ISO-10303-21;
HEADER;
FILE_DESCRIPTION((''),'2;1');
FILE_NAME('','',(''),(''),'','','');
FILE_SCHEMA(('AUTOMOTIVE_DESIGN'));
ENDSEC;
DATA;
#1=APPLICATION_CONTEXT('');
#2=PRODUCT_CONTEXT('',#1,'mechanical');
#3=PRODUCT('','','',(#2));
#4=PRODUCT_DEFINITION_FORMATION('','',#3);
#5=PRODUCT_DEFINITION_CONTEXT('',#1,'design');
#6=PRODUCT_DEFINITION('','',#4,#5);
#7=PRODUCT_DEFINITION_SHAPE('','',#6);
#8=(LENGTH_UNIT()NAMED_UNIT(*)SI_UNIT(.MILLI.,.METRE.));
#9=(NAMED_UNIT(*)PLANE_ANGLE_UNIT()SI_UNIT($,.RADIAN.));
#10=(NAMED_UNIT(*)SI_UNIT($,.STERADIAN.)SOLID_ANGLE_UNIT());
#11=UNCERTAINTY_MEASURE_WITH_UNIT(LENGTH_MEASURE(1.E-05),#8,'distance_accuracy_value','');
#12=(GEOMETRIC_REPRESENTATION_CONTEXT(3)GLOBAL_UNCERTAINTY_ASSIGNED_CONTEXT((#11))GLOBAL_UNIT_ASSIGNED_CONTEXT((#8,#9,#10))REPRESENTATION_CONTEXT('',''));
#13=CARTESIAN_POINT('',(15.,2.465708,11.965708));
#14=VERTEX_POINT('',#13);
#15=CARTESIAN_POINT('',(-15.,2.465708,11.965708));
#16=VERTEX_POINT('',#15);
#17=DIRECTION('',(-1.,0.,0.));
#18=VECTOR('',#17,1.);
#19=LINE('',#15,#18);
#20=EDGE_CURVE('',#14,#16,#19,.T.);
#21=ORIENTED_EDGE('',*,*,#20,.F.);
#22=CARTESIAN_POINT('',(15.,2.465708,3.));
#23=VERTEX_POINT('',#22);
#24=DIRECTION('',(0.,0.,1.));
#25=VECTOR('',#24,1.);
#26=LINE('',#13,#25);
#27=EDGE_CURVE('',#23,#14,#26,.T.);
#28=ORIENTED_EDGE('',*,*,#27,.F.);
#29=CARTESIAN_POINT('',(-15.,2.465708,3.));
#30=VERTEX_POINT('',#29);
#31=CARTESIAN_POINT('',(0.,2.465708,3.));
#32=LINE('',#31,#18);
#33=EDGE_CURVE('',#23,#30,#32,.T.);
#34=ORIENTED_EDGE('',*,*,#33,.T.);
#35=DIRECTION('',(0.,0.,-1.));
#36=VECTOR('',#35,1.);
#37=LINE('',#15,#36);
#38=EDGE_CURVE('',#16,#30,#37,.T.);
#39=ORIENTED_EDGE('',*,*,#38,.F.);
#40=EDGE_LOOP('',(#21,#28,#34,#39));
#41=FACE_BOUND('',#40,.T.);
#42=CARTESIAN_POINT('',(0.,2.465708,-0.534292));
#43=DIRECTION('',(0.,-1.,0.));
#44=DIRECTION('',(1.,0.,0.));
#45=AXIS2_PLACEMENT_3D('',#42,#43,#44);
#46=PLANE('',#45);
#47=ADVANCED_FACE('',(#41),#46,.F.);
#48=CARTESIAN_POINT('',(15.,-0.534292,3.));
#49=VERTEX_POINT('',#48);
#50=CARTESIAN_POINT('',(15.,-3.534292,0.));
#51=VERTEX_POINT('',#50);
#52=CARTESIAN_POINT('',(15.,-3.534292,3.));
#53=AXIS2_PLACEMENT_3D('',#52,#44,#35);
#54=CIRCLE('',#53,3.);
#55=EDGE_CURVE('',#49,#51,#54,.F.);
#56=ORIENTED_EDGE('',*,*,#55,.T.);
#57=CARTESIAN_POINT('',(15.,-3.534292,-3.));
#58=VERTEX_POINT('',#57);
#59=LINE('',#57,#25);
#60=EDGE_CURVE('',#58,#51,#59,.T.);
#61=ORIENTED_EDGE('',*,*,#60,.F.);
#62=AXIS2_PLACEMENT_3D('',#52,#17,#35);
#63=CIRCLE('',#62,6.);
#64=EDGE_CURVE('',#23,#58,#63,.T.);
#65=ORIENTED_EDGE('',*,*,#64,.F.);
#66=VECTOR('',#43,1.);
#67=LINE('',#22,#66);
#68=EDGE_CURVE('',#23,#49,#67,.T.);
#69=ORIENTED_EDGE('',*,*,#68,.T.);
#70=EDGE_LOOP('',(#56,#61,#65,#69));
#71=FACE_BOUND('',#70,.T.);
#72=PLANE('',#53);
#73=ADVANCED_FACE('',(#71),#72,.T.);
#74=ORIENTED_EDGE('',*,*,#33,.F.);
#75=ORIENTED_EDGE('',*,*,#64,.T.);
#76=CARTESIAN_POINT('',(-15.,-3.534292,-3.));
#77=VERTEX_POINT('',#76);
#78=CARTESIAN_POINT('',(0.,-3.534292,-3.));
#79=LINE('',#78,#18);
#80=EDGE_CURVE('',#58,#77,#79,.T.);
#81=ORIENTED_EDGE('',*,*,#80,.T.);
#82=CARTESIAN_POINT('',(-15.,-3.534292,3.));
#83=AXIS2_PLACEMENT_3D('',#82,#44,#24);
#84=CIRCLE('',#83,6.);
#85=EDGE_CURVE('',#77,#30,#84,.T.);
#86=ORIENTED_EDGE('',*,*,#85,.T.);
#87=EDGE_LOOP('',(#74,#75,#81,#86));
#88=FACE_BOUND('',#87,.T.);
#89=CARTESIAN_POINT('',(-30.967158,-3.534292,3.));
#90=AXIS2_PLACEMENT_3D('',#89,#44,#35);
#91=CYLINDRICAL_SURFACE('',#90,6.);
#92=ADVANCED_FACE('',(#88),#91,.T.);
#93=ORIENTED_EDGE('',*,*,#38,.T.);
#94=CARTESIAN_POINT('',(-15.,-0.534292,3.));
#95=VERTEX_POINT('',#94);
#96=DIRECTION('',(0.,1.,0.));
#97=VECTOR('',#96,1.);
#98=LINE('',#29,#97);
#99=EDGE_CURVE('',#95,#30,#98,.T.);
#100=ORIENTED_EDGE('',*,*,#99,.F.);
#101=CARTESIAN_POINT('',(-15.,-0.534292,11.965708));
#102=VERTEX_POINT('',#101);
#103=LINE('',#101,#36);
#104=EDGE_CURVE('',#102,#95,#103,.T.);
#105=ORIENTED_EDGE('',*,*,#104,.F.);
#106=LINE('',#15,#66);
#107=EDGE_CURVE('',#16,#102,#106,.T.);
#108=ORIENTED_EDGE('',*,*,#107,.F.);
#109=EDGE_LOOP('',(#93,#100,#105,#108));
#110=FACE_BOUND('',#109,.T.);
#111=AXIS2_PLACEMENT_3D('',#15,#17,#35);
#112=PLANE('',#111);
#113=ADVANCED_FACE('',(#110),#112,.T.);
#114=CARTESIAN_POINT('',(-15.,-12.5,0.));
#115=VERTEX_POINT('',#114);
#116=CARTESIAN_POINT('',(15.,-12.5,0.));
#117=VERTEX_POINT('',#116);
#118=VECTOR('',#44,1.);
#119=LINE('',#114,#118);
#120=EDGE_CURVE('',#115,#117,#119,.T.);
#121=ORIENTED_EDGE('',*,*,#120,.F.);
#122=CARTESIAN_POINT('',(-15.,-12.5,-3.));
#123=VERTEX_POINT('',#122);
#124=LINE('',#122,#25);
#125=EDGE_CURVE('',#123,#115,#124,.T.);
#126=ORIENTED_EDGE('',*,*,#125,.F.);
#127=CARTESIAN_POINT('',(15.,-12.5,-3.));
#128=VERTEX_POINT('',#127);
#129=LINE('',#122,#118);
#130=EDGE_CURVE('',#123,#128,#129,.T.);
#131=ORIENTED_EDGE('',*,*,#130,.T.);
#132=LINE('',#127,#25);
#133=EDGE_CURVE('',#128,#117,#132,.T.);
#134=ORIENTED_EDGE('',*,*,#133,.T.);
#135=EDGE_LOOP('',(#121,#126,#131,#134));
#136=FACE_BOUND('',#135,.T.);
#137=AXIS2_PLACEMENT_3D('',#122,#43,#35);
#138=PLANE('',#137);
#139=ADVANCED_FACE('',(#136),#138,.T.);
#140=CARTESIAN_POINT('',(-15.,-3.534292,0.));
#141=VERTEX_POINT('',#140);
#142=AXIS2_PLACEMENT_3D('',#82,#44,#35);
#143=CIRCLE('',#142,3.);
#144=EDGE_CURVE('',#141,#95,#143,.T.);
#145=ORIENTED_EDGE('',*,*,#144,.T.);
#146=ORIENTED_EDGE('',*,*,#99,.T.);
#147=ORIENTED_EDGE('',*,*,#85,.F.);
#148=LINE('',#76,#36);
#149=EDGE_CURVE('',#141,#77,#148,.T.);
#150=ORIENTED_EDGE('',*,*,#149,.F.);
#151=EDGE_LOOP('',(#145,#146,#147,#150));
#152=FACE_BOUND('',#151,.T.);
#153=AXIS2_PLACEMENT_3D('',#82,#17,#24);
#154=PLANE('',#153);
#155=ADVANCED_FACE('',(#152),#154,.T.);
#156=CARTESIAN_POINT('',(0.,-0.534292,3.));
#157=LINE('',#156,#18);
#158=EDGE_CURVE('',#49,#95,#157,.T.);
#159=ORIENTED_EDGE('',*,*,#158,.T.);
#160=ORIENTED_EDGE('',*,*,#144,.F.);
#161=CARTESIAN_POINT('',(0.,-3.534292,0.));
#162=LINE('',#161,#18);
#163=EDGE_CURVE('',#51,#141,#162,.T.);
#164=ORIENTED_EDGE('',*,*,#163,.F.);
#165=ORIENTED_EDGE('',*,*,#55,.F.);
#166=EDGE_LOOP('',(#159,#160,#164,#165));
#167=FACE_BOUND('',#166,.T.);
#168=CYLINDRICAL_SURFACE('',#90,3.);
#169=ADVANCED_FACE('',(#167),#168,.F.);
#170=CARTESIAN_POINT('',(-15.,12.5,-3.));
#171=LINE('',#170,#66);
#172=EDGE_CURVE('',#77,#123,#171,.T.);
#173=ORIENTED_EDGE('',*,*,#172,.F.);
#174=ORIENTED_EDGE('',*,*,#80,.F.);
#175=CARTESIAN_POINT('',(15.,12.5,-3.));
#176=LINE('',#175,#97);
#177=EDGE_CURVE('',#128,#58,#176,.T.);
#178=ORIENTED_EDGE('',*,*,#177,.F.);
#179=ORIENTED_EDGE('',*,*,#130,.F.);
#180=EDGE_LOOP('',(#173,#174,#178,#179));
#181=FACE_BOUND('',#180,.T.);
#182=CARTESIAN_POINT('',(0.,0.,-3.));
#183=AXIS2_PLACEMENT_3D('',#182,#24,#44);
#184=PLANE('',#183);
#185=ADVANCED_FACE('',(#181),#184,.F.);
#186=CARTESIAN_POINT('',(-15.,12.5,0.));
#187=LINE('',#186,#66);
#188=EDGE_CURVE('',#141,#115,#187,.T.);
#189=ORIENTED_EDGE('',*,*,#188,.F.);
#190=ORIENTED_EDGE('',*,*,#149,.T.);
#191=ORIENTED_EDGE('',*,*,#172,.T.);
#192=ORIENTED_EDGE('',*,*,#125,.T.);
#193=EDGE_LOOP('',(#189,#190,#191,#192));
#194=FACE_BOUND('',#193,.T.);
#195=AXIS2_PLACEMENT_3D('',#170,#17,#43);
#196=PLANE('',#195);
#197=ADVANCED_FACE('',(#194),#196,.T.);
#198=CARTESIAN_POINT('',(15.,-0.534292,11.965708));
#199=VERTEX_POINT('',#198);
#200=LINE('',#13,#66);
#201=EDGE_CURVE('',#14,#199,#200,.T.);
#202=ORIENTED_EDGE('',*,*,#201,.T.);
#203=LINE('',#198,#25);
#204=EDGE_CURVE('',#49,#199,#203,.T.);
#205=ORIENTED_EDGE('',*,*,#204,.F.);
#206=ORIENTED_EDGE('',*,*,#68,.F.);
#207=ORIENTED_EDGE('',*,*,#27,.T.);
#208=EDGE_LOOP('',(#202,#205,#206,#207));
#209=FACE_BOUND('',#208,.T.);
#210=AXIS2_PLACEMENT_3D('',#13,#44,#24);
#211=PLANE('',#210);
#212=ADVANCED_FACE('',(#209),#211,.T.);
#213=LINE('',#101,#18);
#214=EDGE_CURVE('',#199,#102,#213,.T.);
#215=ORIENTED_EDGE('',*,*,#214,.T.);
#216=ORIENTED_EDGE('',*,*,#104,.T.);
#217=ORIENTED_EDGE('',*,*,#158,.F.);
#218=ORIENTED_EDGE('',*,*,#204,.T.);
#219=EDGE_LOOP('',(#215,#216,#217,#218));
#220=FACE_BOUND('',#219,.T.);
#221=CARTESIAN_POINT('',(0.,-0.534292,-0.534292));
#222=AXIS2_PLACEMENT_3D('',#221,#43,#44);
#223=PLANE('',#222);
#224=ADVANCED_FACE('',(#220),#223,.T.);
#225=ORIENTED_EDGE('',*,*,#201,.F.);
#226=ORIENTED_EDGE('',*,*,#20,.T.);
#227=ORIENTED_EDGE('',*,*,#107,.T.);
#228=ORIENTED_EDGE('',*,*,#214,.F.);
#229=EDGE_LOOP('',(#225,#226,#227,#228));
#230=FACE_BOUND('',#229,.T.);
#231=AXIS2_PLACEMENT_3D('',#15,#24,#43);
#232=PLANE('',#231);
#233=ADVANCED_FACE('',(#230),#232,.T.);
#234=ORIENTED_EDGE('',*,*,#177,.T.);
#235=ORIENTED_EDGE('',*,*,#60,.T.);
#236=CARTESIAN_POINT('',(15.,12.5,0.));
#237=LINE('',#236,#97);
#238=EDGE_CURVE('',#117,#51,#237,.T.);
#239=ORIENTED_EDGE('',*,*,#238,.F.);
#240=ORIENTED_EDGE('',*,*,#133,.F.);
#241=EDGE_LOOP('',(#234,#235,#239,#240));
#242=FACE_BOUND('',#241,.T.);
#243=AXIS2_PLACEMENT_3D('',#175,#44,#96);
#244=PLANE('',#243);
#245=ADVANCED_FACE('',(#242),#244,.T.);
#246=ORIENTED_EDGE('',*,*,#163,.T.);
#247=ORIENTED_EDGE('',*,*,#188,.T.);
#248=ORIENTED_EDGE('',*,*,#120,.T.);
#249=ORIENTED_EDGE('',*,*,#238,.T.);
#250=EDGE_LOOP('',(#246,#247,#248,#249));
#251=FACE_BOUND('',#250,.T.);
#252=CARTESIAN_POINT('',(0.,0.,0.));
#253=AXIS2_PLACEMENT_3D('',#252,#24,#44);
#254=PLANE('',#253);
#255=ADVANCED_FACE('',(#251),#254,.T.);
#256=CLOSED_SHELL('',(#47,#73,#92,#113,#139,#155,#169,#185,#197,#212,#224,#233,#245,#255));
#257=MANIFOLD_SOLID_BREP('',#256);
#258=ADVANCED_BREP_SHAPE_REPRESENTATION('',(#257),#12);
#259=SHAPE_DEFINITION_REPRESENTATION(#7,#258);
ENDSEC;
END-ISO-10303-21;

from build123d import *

# Parameters (mm, degrees)
SKETCH1_W              = 30
SKETCH1_H              = 25
BASE_FLANGE1_DEPTH     = 3
SKETCHED_START         = -15
SKETCHED_BEND1_DEPTH   = 30
SKETCHED_BEND1_2_DEPTH = 30


# Read off the part's stored shape, not the designer's step: Sketched Bend1
# Sheet-metal steps are written as plain solids
with BuildPart() as part:
    # Sketch1 → Base-Flange1 (new body)
    with BuildSketch(Plane.XY):
        Rectangle(SKETCH1_W, SKETCH1_H)
    extrude(amount=-BASE_FLANGE1_DEPTH)

    # Sketched Bend1 outline → Sketched Bend1 (cut)
    with BuildSketch(Plane.YZ.offset(SKETCHED_START)):
        with BuildLine():
            Line((12.5, 0), (1.661860688, 0))
            ThreePointArc((1.661860688, 0), (-0.534291735, -2.196152423), (-3.534291735, -3))
            Line((-3.534291735, -3), (12.5, -3))
            Line((12.5, -3), (12.5, 0))
        make_face()
    extrude(amount=SKETCHED_BEND1_DEPTH, mode=Mode.SUBTRACT)

    # Sketched Bend1 2 outline → Sketched Bend1 2 (add)
    with BuildSketch(Plane.YZ.offset(SKETCHED_START)):
        with BuildLine():
            Line((2.465708265, 3), (2.465708265, 11.965708265))
            Line((2.465708265, 11.965708265), (-0.534291735, 11.965708265))
            Line((-0.534291735, 11.965708265), (-0.534291735, 3))
            ThreePointArc((-0.534291735, 3), (-1.412971392, 0.878679657), (-3.534291735, 0))
            Line((-3.534291735, 0), (1.661860688, 0))
            ThreePointArc((1.661860688, 0), (2.261263223, 1.447085729), (2.465708265, 3))
        make_face()
    extrude(amount=SKETCHED_BEND1_2_DEPTH)


solid = part.part
